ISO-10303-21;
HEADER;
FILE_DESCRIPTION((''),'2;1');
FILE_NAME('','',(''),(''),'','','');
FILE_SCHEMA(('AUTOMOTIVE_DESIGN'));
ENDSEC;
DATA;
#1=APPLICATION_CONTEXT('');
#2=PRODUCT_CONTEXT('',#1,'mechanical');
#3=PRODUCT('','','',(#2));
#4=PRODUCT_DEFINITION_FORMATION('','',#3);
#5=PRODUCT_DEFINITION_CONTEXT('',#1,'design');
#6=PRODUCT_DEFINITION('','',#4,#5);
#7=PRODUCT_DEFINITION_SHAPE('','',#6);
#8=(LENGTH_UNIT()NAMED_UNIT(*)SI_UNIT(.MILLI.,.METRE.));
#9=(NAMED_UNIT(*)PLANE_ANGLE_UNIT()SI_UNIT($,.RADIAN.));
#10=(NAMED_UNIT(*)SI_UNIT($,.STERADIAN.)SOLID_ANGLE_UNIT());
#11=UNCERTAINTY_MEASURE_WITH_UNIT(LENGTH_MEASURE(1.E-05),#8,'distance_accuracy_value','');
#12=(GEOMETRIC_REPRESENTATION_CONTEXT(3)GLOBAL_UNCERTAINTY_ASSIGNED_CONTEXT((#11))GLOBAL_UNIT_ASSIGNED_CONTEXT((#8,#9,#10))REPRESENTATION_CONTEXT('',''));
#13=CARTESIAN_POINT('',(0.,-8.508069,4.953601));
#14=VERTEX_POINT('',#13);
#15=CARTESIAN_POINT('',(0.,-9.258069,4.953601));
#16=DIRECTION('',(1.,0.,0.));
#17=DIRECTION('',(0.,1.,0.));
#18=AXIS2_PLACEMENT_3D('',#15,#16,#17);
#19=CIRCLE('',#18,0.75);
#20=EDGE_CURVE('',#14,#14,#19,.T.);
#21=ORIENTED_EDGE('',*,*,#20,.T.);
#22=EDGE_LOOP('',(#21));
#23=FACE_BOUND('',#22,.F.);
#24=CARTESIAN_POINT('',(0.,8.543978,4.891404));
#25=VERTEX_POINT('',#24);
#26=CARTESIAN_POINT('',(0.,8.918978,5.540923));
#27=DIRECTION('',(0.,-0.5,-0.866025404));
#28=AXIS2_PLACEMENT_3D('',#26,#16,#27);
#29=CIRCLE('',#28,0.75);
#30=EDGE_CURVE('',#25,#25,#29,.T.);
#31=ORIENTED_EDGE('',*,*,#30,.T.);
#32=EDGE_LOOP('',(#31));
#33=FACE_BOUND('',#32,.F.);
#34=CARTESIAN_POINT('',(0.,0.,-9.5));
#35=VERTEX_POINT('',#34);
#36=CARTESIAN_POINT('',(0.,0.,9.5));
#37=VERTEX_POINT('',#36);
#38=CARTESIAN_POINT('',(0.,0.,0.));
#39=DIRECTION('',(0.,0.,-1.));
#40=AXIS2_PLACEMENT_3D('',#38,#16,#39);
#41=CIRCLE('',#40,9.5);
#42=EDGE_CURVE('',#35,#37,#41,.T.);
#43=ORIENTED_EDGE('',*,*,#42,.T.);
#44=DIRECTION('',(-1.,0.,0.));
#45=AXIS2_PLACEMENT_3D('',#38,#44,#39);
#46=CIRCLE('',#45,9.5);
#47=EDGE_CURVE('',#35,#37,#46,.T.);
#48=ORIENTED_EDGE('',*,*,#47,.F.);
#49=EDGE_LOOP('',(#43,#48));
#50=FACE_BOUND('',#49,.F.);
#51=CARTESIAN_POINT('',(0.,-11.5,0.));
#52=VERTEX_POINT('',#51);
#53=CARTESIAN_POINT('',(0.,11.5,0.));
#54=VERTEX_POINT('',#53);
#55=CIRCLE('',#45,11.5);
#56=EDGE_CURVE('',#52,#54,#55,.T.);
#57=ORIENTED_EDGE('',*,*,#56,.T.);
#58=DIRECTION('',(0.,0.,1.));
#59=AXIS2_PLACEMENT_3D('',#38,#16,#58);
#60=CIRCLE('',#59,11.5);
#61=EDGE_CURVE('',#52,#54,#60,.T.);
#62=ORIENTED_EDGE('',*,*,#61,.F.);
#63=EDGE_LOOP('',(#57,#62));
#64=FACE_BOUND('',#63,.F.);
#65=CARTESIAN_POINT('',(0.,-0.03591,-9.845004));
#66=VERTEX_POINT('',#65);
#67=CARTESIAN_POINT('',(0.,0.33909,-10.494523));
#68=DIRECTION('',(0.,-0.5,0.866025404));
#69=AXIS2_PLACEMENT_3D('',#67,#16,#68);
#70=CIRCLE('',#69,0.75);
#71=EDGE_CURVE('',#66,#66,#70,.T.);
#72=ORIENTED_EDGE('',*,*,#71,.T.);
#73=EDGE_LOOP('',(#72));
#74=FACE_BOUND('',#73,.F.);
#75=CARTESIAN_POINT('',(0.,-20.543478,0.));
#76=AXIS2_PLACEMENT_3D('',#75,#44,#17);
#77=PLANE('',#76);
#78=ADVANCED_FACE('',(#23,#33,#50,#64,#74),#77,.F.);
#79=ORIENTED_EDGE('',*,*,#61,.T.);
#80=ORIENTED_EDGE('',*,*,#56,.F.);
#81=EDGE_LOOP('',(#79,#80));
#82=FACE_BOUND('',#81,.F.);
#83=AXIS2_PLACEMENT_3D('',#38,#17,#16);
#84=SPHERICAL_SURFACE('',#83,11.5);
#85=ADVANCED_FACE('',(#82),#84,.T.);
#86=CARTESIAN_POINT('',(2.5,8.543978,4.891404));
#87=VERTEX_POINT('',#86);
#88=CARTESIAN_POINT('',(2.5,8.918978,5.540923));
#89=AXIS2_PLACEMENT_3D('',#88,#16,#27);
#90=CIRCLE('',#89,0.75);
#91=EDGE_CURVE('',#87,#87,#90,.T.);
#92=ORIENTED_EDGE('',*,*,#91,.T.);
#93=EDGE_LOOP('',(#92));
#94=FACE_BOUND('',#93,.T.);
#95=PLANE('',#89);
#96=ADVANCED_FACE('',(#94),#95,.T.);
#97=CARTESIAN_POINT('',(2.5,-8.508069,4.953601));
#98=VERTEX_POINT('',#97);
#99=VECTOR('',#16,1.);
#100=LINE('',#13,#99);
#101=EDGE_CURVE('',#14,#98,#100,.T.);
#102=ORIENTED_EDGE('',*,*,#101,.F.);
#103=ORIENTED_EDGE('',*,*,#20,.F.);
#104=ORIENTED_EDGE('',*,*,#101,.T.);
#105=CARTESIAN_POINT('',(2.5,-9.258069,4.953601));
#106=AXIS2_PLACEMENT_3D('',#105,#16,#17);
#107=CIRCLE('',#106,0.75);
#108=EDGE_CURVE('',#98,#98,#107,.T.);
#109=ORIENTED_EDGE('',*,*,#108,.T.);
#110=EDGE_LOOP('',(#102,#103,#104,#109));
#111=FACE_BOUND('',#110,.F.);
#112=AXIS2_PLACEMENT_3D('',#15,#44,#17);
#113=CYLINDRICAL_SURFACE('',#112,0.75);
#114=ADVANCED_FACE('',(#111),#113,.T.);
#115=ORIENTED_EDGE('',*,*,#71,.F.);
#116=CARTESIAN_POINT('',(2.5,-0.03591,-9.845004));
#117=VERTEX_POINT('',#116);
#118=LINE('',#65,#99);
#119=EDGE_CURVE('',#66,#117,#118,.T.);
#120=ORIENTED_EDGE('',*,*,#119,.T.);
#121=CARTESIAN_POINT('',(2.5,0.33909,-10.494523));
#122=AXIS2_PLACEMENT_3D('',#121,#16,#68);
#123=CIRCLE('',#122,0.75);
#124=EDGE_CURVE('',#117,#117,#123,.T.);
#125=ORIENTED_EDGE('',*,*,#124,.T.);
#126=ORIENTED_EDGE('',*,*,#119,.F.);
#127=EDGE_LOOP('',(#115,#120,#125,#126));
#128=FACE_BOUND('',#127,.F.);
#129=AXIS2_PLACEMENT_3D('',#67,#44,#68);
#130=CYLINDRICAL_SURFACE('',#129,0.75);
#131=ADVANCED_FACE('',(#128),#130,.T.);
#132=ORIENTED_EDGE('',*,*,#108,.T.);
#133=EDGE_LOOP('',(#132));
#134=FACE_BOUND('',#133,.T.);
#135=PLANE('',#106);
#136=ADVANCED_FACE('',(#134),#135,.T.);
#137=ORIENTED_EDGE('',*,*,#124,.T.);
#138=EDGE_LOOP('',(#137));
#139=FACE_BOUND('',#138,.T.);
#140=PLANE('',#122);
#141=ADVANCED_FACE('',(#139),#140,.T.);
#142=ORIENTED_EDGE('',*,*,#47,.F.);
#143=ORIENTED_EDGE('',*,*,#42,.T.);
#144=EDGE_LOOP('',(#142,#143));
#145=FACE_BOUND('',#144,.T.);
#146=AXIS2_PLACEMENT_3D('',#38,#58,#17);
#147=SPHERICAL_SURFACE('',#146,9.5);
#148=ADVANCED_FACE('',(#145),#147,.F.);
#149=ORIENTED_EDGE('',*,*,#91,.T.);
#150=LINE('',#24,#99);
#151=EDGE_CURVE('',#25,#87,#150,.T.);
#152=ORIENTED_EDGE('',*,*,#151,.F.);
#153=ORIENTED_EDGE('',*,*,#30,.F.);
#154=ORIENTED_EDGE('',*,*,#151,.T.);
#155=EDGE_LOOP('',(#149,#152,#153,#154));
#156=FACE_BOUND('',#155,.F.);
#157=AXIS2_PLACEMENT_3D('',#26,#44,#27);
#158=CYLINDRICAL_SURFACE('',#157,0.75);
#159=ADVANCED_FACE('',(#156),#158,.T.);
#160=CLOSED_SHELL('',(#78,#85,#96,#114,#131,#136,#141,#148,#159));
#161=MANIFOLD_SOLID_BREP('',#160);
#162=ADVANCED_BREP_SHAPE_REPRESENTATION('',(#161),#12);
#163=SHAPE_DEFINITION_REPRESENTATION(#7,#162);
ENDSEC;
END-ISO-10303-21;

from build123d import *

# Parameters (mm, degrees)
F2_W            = 26.7493221909
F2_H            = 40.8729631454
F3_DEPTH        = 25
F3_DEPTH_BACK   = 37.9
F6_R            = 0.75
F7_DEPTH        = 2.5
F7_COPIES_COUNT = 3


# Not quite as in the source:
# - a pattern or mirror of a feature is missing from the dataset's text; its kind, count and spacing are read off the source's solid


with BuildPart() as f1:
    # F0 (on Top) → F1 (revolve)
    with BuildSketch(Plane.XY):
        with BuildLine():
            Line((0, 11.5), (0, -11.5))
            ThreePointArc((0, -11.5), (11.5, 0), (0, 11.5))
        make_face()
    revolve(axis=Axis((0, 0, 0), (0, -1, 0)))

    # F2 (on Top) → F3 (cut, two sides)
    with BuildSketch(Plane.XY) as f3_sk:
        with Locations((13.3746610954, -0.1069968566)):
            Rectangle(F2_W, F2_H)
    extrude(amount=-F3_DEPTH, mode=Mode.SUBTRACT)
    extrude(f3_sk.sketch, amount=F3_DEPTH_BACK, mode=Mode.SUBTRACT)

    # F4 (on face) → F5 (revolve, cut)
    with BuildSketch(Plane.YZ):
        with BuildLine():
            Line((0, 9.5), (0, -9.5))
            ThreePointArc((0, -9.5), (9.5, 0), (0, 9.5))
        make_face()
    revolve(axis=Axis((0, 0, 0), (0, 0, -1)), mode=Mode.SUBTRACT)

    # F6 (on face) → F7 (join)
    with BuildSketch(Plane.YZ):
        with Locations((-9.2580689408, 4.9536006588)):
            Circle(F6_R)
    f7 = extrude(amount=F7_DEPTH)

    # F7_copies: F7 ×3 about axis
    f7_copies_axis = Axis((0, 0, 0), (1, 0, 0))
    for i in range(1, F7_COPIES_COUNT):
        add(f7.rotate(f7_copies_axis, i * 360 / F7_COPIES_COUNT))


solid = f1.part
